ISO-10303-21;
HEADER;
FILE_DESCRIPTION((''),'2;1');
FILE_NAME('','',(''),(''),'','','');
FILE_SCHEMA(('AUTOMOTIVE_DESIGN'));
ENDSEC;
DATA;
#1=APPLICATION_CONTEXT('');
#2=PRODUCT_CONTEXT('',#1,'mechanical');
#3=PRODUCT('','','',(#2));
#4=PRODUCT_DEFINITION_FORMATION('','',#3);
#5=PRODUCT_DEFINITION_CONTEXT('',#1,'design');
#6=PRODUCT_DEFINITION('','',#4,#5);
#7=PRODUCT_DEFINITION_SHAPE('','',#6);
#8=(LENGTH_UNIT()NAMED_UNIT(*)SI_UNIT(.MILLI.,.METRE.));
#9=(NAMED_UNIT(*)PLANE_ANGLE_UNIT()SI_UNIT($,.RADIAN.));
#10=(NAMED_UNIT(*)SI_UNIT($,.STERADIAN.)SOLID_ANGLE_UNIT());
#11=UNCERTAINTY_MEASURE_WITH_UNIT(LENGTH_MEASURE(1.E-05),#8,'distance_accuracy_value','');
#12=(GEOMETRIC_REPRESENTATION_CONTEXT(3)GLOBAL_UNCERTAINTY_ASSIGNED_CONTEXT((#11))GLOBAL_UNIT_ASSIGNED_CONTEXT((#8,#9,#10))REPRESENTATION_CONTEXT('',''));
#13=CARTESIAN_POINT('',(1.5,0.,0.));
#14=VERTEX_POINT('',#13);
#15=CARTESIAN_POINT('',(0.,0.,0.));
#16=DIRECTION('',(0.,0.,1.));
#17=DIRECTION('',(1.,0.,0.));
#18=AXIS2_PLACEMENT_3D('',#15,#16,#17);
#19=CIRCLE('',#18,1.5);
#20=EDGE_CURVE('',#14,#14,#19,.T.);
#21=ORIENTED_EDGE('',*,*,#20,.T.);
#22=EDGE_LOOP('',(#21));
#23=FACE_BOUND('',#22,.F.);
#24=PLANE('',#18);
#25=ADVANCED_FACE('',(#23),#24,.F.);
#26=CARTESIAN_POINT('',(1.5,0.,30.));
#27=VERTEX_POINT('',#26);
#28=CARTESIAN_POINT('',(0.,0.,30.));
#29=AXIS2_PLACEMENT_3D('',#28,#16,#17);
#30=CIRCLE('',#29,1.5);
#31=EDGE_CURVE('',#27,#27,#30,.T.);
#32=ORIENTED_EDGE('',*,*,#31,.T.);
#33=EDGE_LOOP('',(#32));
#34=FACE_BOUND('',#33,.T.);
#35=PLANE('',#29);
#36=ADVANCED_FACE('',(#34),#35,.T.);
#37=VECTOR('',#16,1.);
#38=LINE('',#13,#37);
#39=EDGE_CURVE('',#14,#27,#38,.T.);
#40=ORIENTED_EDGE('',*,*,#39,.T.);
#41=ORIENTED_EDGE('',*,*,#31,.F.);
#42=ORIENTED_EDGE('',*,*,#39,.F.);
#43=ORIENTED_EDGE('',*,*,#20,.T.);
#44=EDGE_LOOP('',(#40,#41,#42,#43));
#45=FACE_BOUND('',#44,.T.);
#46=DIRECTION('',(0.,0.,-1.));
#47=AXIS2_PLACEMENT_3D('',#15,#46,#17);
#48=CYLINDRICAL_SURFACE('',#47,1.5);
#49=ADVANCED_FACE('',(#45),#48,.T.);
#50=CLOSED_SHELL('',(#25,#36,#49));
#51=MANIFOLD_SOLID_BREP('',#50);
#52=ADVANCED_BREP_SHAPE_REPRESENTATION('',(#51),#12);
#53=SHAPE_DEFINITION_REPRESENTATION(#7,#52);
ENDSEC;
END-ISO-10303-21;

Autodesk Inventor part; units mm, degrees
ref_plane "YZ Plane" through (0, 0, 0) normal (1, 0, 0) x (0, 1, 0)
ref_plane "XZ Plane" through (0, 0, 0) normal (0, 1, 0) x (-1, 0, 0)
ref_plane "XY Plane" through (0, 0, 0) normal (0, 0, 1) x (1, 0, 0)
sketch "Sketch1" plane through (0, 0, 0) normal (0, 0, 1) x (1, 0, 0)
  circle A0 centre (0, 0) radius 1.5
  dimension "d0" = 3
extrude "Extrusion1" add sketch "Sketch1" along normal blind 30
thread "Thread1" size "M3x0.35" class "6g" standard "ANSI Metric M Profile" length 25
properties part number "TigeM3FinAxis"
